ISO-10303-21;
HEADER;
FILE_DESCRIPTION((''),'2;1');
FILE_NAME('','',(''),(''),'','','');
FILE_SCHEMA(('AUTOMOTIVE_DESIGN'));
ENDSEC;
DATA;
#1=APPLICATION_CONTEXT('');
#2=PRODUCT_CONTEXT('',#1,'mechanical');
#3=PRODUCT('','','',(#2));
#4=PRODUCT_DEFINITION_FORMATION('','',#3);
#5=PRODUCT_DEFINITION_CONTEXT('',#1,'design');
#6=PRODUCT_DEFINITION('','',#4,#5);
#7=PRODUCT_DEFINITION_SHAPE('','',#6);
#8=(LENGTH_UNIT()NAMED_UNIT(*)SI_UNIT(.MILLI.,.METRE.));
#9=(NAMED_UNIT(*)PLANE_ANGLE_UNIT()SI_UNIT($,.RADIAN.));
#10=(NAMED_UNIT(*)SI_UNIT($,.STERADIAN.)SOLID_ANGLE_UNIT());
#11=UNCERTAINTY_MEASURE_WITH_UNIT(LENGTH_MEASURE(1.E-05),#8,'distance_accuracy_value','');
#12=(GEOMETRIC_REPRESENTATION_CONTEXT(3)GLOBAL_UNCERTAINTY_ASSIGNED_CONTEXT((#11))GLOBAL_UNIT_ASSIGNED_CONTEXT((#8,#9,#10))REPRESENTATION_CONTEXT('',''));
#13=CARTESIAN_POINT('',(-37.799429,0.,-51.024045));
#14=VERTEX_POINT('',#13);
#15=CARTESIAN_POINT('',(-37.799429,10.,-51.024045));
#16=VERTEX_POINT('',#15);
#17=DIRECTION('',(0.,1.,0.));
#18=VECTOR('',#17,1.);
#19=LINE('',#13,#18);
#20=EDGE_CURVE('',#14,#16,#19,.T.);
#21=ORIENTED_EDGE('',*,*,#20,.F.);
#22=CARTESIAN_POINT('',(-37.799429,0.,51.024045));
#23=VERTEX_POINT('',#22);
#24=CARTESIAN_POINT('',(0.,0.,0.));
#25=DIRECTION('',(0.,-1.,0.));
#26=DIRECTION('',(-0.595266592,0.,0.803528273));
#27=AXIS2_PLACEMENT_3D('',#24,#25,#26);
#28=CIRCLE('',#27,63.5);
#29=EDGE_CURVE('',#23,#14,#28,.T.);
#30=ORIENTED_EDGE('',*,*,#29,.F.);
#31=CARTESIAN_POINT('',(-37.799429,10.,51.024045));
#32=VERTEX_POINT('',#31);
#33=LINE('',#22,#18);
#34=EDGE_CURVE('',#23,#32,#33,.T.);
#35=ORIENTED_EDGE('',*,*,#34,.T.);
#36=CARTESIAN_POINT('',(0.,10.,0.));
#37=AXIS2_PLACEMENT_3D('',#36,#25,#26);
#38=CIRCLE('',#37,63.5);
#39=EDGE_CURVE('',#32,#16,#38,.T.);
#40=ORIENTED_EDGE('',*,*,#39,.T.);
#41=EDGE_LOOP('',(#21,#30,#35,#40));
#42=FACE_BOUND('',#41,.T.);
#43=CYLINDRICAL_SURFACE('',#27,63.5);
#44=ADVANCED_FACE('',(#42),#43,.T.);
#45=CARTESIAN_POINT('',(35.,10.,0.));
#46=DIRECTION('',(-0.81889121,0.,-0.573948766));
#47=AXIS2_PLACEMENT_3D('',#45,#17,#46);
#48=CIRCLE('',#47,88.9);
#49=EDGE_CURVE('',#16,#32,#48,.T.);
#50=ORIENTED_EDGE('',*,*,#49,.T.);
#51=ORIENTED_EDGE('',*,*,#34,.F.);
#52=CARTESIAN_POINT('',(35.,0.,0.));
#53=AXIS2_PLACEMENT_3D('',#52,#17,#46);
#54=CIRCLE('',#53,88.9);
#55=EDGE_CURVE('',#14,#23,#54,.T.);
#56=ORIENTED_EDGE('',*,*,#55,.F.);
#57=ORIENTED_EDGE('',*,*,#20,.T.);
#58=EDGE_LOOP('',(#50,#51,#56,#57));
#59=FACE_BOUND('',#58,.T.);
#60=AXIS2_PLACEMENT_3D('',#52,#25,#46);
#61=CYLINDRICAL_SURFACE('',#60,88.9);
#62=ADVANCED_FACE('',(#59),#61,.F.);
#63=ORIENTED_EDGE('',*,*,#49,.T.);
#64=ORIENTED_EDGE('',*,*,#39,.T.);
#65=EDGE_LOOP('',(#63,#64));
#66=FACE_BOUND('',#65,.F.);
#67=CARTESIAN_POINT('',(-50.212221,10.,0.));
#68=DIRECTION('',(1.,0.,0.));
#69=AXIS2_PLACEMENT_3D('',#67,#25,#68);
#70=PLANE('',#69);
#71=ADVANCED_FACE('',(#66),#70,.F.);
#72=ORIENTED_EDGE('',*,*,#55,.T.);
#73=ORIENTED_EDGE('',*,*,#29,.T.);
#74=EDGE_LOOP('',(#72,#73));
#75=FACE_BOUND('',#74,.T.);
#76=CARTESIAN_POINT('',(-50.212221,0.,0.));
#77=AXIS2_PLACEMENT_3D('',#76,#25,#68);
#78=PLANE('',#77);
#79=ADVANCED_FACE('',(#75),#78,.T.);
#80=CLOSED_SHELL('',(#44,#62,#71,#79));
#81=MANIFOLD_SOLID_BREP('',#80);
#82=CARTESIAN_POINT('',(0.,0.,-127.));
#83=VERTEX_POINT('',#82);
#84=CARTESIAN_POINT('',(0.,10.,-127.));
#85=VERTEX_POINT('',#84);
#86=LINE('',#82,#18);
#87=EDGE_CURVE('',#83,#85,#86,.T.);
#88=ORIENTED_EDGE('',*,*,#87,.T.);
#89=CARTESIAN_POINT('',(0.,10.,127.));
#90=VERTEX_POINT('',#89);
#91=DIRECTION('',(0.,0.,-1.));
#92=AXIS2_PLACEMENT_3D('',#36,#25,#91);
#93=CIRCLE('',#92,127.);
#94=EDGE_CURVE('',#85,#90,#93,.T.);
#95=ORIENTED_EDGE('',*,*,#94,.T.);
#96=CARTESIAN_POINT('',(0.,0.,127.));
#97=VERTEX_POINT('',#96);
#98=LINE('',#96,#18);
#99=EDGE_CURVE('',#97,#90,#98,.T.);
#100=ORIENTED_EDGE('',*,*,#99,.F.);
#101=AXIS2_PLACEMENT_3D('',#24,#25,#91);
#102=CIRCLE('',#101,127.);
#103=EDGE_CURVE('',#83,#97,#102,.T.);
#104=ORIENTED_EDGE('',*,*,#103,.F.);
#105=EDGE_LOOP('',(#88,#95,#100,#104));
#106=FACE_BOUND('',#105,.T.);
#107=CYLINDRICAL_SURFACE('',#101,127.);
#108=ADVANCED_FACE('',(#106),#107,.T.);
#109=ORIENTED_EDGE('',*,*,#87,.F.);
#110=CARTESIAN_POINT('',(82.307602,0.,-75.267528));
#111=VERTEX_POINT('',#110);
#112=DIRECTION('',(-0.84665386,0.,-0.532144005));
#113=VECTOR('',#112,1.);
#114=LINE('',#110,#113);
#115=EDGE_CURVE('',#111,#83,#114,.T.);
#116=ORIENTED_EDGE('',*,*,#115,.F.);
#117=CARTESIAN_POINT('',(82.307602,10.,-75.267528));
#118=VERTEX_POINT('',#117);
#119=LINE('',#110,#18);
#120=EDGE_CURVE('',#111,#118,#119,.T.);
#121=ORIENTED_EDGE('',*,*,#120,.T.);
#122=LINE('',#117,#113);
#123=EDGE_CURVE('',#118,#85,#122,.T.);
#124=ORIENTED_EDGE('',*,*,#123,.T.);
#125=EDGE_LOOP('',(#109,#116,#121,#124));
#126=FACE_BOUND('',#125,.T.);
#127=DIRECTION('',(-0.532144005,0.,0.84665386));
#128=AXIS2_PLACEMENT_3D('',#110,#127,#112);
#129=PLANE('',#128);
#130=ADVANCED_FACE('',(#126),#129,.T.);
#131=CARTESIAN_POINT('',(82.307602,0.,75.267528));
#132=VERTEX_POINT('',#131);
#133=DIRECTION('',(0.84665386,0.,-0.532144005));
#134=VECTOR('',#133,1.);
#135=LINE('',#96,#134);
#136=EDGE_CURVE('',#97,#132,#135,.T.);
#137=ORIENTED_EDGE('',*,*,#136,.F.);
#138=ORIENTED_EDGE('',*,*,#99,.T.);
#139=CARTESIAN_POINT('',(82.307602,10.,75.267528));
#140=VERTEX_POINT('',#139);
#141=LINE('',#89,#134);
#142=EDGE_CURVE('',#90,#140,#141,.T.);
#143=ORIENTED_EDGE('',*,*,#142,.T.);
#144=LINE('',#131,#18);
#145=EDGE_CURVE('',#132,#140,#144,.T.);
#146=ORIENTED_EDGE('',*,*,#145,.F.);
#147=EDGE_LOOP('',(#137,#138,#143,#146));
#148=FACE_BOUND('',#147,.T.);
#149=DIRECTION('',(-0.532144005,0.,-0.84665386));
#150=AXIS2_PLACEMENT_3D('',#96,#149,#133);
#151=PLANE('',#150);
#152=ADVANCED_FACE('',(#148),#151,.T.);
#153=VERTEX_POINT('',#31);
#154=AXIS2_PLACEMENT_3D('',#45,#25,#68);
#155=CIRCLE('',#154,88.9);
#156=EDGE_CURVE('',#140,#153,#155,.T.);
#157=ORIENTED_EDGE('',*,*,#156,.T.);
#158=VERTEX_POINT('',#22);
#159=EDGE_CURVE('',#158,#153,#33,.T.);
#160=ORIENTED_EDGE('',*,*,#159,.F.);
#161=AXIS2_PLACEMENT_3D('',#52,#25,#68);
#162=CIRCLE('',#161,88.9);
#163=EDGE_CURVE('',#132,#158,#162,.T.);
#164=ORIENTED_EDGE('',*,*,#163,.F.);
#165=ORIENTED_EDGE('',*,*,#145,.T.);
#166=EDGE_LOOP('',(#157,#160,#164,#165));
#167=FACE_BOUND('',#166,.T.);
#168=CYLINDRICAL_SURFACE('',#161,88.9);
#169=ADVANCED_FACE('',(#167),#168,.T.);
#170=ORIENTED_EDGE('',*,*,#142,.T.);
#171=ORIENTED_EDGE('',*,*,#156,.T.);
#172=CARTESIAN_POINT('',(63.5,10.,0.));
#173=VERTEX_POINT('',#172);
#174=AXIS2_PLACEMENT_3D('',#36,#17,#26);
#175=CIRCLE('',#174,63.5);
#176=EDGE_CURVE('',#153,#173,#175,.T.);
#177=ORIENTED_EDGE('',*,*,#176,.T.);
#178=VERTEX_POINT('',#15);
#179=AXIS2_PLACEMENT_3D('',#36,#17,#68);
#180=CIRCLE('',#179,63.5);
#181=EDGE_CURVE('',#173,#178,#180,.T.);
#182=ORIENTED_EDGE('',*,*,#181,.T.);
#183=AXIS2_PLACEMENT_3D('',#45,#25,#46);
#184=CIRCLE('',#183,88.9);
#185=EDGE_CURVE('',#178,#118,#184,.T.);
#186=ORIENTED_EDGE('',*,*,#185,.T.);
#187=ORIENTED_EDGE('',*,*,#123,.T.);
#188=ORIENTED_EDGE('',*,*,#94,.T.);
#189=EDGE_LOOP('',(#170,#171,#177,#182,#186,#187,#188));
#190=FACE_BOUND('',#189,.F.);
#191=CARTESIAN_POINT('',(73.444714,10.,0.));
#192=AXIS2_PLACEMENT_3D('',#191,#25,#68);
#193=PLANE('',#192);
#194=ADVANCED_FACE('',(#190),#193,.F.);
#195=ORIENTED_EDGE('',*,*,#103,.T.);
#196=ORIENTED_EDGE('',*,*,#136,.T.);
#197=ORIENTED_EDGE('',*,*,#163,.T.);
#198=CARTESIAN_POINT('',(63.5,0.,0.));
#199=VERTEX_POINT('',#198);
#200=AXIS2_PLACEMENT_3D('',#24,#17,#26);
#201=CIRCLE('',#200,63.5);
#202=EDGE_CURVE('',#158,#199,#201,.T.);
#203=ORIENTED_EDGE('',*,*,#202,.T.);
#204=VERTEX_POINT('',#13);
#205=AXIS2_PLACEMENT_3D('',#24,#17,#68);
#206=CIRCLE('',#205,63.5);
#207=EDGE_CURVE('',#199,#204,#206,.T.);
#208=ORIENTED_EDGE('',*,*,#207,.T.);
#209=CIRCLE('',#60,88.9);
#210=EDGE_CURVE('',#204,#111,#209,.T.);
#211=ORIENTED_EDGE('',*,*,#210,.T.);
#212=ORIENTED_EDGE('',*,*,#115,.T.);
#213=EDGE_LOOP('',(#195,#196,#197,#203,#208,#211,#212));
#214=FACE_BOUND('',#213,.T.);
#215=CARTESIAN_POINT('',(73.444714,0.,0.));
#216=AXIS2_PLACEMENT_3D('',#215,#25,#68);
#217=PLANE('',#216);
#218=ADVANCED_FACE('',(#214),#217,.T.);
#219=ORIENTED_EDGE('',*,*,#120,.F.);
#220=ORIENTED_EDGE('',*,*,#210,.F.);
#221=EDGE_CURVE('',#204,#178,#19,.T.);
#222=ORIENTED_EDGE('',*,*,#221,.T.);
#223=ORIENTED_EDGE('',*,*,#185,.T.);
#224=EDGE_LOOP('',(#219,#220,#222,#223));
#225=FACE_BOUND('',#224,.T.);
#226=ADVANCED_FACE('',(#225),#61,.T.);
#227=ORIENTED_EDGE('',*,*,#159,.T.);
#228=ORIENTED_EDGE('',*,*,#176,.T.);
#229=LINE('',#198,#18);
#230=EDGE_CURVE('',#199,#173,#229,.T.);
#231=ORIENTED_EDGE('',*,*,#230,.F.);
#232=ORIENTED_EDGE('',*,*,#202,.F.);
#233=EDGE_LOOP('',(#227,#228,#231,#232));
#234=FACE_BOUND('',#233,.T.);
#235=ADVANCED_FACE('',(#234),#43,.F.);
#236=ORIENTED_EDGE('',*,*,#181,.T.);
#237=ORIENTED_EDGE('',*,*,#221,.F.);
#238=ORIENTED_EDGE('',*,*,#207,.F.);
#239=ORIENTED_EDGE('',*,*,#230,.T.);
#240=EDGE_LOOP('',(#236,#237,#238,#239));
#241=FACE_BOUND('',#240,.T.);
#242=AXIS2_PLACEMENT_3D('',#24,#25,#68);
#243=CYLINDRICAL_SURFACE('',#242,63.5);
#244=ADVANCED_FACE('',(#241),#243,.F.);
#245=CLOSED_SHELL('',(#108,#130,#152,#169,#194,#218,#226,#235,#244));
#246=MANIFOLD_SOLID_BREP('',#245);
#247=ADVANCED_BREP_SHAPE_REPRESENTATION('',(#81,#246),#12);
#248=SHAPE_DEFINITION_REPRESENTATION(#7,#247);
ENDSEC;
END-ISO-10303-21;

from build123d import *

# Parameters (mm, degrees)
F1_DEPTH = 10


with BuildPart() as f1:
    # F0 (on Front) → F1 (new body)
    with BuildSketch(Plane.XZ):
        with BuildLine():
            ThreePointArc((0, -127), (89.8025612107, -89.8025612107), (127, 0))
            ThreePointArc((127, 0), (89.8025612107, 89.8025612107), (0, 127))
            Line((0, 127), (82.3076020381, 75.2675281207))
            ThreePointArc((82.3076020381, 75.2675281207), (112.8102044117, 42.9974660812), (123.9, 0))
            ThreePointArc((123.9, 0), (112.8102044117, -42.9974660812), (82.3076020381, -75.2675281207))
            Line((82.3076020381, -75.2675281207), (0, -127))
        make_face()
        with BuildLine():
            ThreePointArc((123.9, 0), (112.8102044117, 42.9974660812), (82.3076020381, 75.2675281207))
            ThreePointArc((82.3076020381, 75.2675281207), (17.4103746568, 87.1424987035), (-37.7994285714, 51.0240453088))
            ThreePointArc((-37.7994285714, 51.0240453088), (28.5655936899, 56.7120521331), (63.5, 0))
            ThreePointArc((63.5, 0), (28.5655936899, -56.7120521331), (-37.7994285714, -51.0240453088))
            ThreePointArc((-37.7994285714, -51.0240453088), (17.4103746568, -87.1424987035), (82.3076020381, -75.2675281207))
            ThreePointArc((82.3076020381, -75.2675281207), (112.8102044117, -42.9974660812), (123.9, 0))
        make_face()
    extrude(amount=-F1_DEPTH)


with BuildPart() as f1b:
    # F0 (on Front) → F1, piece 2 (new body)
    with BuildSketch(Plane.XZ):
        with BuildLine():
            ThreePointArc((-37.7994285714, -51.0240453088), (-53.9, 0), (-37.7994285714, 51.0240453088))
            ThreePointArc((-37.7994285714, 51.0240453088), (-63.5, 0), (-37.7994285714, -51.0240453088))
        make_face()
    extrude(amount=-F1_DEPTH)


solid = Compound([f1.part, f1b.part])
